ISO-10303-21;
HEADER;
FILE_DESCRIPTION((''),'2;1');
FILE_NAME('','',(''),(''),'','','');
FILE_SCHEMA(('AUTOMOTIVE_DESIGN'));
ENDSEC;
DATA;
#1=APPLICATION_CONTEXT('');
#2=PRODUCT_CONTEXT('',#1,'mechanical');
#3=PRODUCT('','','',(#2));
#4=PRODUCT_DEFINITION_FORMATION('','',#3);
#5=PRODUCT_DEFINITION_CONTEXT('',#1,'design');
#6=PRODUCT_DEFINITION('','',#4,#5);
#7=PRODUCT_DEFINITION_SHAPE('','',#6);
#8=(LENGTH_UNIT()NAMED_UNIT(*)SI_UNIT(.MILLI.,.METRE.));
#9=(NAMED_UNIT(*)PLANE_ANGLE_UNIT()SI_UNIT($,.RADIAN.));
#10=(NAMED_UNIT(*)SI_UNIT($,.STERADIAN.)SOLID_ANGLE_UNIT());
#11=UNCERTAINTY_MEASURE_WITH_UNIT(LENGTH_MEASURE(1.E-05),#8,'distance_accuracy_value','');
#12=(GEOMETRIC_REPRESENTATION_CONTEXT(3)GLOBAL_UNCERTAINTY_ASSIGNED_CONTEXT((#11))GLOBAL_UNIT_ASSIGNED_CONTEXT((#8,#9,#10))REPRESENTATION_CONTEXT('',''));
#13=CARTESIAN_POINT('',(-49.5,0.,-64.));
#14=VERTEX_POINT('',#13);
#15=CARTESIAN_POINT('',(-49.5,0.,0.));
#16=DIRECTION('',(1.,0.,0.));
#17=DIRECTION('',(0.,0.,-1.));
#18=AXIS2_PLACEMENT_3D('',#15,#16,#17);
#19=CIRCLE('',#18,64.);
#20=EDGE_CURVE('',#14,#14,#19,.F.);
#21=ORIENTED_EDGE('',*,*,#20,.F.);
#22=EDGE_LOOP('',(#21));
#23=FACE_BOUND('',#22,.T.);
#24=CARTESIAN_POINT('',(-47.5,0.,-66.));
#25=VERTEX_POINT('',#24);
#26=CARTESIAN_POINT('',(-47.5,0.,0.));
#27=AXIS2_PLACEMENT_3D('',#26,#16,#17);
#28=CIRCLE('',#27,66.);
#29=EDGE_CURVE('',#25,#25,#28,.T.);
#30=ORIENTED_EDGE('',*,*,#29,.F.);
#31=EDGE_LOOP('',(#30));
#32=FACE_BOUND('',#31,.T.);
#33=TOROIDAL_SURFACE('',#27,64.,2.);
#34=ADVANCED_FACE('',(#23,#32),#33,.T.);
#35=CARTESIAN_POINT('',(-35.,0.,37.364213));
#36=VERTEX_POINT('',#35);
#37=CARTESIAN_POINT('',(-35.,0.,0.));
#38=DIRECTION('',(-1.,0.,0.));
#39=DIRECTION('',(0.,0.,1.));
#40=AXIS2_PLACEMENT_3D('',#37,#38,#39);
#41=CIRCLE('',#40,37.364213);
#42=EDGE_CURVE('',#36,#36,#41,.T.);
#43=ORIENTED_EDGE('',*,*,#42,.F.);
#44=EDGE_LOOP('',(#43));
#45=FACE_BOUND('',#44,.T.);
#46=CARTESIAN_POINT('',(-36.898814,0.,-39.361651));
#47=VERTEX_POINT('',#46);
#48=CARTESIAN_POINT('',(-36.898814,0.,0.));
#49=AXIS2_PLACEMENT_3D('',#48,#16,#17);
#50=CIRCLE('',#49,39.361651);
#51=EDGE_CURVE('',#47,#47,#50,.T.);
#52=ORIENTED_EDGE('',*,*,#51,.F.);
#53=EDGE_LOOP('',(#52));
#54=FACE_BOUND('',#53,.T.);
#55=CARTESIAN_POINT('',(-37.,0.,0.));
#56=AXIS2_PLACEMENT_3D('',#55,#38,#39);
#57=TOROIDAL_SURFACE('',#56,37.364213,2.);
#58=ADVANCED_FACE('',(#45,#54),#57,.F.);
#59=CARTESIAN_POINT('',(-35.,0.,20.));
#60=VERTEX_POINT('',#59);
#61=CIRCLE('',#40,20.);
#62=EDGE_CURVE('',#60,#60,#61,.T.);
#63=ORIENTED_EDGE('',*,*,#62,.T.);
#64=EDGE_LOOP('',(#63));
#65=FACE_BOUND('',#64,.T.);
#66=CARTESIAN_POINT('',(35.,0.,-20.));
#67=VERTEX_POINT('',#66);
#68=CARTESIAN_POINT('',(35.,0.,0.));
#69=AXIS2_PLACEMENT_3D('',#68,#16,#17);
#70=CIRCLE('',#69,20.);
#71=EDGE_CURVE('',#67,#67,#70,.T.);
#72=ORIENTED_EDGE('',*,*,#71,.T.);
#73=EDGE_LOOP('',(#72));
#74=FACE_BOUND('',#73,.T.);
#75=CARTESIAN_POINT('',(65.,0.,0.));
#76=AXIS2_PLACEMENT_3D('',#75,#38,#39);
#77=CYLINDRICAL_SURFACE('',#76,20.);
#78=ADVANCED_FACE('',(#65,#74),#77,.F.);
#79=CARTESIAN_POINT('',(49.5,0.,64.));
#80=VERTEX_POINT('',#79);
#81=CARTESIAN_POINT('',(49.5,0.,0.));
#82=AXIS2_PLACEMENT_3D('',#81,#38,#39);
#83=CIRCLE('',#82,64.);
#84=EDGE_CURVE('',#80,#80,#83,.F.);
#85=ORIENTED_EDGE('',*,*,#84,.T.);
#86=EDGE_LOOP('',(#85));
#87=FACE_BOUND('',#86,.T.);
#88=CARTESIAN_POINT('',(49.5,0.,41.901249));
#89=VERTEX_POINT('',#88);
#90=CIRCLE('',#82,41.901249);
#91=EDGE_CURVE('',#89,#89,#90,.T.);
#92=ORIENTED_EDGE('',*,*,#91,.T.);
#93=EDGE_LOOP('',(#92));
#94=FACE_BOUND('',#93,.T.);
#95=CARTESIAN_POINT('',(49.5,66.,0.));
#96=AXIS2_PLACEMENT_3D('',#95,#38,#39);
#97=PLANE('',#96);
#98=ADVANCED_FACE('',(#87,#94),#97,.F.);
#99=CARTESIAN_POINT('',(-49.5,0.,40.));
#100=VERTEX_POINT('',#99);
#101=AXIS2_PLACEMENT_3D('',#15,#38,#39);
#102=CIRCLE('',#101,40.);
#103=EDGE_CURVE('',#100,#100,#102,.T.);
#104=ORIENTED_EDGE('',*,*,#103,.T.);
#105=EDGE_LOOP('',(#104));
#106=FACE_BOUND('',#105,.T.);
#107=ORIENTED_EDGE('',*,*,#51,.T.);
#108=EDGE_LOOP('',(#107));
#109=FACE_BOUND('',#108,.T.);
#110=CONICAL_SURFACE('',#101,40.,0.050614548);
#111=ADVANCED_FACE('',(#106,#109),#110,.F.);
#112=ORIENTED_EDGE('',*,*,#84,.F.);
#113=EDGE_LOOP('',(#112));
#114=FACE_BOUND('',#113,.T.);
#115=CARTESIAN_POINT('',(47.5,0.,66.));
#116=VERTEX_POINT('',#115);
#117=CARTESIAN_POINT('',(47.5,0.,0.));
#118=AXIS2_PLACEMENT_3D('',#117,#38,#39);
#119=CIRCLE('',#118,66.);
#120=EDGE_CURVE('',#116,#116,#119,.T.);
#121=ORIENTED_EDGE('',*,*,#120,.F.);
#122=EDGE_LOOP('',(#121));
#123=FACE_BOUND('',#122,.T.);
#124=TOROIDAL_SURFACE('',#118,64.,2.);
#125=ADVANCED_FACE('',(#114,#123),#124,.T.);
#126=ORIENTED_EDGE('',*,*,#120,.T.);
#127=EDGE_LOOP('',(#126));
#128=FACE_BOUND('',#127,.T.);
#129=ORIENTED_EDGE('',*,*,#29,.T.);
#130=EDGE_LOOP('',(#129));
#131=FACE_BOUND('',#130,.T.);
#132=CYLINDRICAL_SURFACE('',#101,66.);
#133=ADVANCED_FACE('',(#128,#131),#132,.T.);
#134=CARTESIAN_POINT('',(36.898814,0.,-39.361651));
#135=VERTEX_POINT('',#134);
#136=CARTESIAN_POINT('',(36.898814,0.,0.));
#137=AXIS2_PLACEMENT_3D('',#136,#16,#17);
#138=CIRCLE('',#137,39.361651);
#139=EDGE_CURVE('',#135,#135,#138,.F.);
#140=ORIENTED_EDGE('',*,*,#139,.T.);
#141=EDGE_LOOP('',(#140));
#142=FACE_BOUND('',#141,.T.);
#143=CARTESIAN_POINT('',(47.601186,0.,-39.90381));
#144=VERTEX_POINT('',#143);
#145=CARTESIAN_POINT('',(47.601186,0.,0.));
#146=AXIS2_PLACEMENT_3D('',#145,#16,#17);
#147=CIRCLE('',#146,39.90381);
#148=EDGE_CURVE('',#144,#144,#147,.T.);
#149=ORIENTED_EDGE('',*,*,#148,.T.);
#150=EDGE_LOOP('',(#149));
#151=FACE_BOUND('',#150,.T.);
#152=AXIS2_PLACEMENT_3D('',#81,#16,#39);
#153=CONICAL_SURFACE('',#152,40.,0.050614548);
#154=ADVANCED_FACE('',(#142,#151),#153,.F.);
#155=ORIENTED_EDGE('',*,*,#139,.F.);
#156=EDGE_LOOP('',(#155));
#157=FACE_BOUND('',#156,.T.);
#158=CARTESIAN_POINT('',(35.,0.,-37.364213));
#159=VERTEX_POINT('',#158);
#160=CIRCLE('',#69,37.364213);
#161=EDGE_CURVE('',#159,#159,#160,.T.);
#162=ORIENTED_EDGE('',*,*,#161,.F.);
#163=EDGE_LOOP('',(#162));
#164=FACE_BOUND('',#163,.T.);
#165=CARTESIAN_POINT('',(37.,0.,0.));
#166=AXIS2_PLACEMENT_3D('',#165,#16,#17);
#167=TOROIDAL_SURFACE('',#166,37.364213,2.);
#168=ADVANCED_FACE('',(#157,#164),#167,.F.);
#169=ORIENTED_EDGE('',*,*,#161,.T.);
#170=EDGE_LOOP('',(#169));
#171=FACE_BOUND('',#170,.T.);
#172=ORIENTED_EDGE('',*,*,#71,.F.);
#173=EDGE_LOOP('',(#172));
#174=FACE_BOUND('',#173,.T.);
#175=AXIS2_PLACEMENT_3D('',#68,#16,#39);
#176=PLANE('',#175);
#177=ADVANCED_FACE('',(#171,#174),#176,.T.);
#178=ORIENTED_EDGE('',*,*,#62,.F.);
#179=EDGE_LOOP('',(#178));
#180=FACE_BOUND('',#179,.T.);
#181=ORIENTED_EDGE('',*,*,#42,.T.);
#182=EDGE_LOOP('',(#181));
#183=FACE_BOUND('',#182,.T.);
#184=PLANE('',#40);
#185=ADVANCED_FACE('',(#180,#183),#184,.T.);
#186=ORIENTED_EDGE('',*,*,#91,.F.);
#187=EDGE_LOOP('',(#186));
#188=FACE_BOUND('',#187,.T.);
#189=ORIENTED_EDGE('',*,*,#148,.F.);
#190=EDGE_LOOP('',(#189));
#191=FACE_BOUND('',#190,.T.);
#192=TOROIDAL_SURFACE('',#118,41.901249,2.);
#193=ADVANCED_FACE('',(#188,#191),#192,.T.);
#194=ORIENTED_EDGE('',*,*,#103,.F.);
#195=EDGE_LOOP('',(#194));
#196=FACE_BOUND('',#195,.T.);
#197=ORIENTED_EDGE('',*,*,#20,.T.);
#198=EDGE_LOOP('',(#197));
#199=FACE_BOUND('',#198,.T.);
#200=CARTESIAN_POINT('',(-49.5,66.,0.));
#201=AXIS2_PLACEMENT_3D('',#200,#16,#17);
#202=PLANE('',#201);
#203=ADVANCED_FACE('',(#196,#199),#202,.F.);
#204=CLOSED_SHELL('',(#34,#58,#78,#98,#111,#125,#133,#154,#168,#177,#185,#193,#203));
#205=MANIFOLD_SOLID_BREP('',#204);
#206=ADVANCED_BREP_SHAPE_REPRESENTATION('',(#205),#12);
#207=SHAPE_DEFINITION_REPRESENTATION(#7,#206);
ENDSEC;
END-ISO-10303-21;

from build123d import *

# Parameters (mm, degrees)
SKETCH_1_W               = 99
SKETCH_1_H               = 66
SKETCH_2_R               = 40
CUT_EXTRUDE_1_DEPTH      = 14.5
CUT_EXTRUDE_1_DRAFT      = -2.9
MIRROR_1_COPY_1_SKETCH_R = 40
MIRROR_1_COPY_1_DEPTH    = 14.5
MIRROR_1_COPY_1_DRAFT    = -2.9
FILLET_1_R               = 2
SKETCH_3_R               = 20
CUT_EXTRUDE_2_DEPTH      = 100


with BuildPart() as part:
    # 草图1 → 旋转2 (revolve)
    with BuildSketch(Plane.XY):
        with Locations((0, 33)):
            Rectangle(SKETCH_1_W, SKETCH_1_H)
    revolve(axis=Axis((-49.5, 0, 0), (1, 0, 0)))


with BuildPart() as cut_extrude_1_tool:
    # 草图2 → 切除-拉伸1 (with draft: the straight prism first)
    with BuildSketch(Plane.ZY.offset(49.5)):
        Circle(SKETCH_2_R)
    extrude(amount=-CUT_EXTRUDE_1_DEPTH)
    # 切除-拉伸1: the draft: its side faces are tilted about the plane it starts from
    cut_extrude_1_sides = [cut_extrude_1_tool.faces().sort_by_distance(p)[0] for p in [
        (-42.25, 0, -40),
    ]]
    draft(cut_extrude_1_sides, Plane.ZY.offset(49.5), CUT_EXTRUDE_1_DRAFT)


with BuildPart() as part_1:
    add(part.part)

    # 切除-拉伸1: cut by cut_extrude_1_tool
    add(cut_extrude_1_tool.part, mode=Mode.SUBTRACT)


with BuildPart() as mirror_1_copy_1_tool:
    # 镜向1 copy 1 sketch → 镜向1 copy 1 (with draft: the straight prism first)
    with BuildSketch(Plane(origin=(49.5, 0, 0), x_dir=(0, 0, 1), z_dir=(1, 0, 0))):
        Circle(MIRROR_1_COPY_1_SKETCH_R)
    extrude(amount=-MIRROR_1_COPY_1_DEPTH)
    # 镜向1 copy 1: the draft: its side faces are tilted about the plane it starts from
    mirror_1_copy_1_sides = [mirror_1_copy_1_tool.faces().sort_by_distance(p)[0] for p in [
        (42.25, 0, -40),
    ]]
    draft(mirror_1_copy_1_sides, Plane(origin=(49.5, 0, 0), x_dir=(0, 0, 1), z_dir=(1, 0, 0)), MIRROR_1_COPY_1_DRAFT)


with BuildPart() as part_2:
    add(part_1.part)

    # 镜向1 copy 1: cut by mirror_1_copy_1_tool
    add(mirror_1_copy_1_tool.part, mode=Mode.SUBTRACT)

    # 圆角1
    fillet_1_edges = [part_2.edges().sort_by_distance(p)[0] for p in [
        (-49.5, -66, 0),
        (35, 0, -39.265461688),
        (49.5, 0, -40),
        (49.5, -66, 0),
        (-35, 0, -39.265461688),
    ]]
    fillet(fillet_1_edges, radius=FILLET_1_R)

    # 草图3 → 切除-拉伸2 (cut)
    with BuildSketch(Plane.ZY.offset(35)):
        Circle(SKETCH_3_R)
    extrude(amount=-CUT_EXTRUDE_2_DEPTH, mode=Mode.SUBTRACT)


solid = part_2.part
